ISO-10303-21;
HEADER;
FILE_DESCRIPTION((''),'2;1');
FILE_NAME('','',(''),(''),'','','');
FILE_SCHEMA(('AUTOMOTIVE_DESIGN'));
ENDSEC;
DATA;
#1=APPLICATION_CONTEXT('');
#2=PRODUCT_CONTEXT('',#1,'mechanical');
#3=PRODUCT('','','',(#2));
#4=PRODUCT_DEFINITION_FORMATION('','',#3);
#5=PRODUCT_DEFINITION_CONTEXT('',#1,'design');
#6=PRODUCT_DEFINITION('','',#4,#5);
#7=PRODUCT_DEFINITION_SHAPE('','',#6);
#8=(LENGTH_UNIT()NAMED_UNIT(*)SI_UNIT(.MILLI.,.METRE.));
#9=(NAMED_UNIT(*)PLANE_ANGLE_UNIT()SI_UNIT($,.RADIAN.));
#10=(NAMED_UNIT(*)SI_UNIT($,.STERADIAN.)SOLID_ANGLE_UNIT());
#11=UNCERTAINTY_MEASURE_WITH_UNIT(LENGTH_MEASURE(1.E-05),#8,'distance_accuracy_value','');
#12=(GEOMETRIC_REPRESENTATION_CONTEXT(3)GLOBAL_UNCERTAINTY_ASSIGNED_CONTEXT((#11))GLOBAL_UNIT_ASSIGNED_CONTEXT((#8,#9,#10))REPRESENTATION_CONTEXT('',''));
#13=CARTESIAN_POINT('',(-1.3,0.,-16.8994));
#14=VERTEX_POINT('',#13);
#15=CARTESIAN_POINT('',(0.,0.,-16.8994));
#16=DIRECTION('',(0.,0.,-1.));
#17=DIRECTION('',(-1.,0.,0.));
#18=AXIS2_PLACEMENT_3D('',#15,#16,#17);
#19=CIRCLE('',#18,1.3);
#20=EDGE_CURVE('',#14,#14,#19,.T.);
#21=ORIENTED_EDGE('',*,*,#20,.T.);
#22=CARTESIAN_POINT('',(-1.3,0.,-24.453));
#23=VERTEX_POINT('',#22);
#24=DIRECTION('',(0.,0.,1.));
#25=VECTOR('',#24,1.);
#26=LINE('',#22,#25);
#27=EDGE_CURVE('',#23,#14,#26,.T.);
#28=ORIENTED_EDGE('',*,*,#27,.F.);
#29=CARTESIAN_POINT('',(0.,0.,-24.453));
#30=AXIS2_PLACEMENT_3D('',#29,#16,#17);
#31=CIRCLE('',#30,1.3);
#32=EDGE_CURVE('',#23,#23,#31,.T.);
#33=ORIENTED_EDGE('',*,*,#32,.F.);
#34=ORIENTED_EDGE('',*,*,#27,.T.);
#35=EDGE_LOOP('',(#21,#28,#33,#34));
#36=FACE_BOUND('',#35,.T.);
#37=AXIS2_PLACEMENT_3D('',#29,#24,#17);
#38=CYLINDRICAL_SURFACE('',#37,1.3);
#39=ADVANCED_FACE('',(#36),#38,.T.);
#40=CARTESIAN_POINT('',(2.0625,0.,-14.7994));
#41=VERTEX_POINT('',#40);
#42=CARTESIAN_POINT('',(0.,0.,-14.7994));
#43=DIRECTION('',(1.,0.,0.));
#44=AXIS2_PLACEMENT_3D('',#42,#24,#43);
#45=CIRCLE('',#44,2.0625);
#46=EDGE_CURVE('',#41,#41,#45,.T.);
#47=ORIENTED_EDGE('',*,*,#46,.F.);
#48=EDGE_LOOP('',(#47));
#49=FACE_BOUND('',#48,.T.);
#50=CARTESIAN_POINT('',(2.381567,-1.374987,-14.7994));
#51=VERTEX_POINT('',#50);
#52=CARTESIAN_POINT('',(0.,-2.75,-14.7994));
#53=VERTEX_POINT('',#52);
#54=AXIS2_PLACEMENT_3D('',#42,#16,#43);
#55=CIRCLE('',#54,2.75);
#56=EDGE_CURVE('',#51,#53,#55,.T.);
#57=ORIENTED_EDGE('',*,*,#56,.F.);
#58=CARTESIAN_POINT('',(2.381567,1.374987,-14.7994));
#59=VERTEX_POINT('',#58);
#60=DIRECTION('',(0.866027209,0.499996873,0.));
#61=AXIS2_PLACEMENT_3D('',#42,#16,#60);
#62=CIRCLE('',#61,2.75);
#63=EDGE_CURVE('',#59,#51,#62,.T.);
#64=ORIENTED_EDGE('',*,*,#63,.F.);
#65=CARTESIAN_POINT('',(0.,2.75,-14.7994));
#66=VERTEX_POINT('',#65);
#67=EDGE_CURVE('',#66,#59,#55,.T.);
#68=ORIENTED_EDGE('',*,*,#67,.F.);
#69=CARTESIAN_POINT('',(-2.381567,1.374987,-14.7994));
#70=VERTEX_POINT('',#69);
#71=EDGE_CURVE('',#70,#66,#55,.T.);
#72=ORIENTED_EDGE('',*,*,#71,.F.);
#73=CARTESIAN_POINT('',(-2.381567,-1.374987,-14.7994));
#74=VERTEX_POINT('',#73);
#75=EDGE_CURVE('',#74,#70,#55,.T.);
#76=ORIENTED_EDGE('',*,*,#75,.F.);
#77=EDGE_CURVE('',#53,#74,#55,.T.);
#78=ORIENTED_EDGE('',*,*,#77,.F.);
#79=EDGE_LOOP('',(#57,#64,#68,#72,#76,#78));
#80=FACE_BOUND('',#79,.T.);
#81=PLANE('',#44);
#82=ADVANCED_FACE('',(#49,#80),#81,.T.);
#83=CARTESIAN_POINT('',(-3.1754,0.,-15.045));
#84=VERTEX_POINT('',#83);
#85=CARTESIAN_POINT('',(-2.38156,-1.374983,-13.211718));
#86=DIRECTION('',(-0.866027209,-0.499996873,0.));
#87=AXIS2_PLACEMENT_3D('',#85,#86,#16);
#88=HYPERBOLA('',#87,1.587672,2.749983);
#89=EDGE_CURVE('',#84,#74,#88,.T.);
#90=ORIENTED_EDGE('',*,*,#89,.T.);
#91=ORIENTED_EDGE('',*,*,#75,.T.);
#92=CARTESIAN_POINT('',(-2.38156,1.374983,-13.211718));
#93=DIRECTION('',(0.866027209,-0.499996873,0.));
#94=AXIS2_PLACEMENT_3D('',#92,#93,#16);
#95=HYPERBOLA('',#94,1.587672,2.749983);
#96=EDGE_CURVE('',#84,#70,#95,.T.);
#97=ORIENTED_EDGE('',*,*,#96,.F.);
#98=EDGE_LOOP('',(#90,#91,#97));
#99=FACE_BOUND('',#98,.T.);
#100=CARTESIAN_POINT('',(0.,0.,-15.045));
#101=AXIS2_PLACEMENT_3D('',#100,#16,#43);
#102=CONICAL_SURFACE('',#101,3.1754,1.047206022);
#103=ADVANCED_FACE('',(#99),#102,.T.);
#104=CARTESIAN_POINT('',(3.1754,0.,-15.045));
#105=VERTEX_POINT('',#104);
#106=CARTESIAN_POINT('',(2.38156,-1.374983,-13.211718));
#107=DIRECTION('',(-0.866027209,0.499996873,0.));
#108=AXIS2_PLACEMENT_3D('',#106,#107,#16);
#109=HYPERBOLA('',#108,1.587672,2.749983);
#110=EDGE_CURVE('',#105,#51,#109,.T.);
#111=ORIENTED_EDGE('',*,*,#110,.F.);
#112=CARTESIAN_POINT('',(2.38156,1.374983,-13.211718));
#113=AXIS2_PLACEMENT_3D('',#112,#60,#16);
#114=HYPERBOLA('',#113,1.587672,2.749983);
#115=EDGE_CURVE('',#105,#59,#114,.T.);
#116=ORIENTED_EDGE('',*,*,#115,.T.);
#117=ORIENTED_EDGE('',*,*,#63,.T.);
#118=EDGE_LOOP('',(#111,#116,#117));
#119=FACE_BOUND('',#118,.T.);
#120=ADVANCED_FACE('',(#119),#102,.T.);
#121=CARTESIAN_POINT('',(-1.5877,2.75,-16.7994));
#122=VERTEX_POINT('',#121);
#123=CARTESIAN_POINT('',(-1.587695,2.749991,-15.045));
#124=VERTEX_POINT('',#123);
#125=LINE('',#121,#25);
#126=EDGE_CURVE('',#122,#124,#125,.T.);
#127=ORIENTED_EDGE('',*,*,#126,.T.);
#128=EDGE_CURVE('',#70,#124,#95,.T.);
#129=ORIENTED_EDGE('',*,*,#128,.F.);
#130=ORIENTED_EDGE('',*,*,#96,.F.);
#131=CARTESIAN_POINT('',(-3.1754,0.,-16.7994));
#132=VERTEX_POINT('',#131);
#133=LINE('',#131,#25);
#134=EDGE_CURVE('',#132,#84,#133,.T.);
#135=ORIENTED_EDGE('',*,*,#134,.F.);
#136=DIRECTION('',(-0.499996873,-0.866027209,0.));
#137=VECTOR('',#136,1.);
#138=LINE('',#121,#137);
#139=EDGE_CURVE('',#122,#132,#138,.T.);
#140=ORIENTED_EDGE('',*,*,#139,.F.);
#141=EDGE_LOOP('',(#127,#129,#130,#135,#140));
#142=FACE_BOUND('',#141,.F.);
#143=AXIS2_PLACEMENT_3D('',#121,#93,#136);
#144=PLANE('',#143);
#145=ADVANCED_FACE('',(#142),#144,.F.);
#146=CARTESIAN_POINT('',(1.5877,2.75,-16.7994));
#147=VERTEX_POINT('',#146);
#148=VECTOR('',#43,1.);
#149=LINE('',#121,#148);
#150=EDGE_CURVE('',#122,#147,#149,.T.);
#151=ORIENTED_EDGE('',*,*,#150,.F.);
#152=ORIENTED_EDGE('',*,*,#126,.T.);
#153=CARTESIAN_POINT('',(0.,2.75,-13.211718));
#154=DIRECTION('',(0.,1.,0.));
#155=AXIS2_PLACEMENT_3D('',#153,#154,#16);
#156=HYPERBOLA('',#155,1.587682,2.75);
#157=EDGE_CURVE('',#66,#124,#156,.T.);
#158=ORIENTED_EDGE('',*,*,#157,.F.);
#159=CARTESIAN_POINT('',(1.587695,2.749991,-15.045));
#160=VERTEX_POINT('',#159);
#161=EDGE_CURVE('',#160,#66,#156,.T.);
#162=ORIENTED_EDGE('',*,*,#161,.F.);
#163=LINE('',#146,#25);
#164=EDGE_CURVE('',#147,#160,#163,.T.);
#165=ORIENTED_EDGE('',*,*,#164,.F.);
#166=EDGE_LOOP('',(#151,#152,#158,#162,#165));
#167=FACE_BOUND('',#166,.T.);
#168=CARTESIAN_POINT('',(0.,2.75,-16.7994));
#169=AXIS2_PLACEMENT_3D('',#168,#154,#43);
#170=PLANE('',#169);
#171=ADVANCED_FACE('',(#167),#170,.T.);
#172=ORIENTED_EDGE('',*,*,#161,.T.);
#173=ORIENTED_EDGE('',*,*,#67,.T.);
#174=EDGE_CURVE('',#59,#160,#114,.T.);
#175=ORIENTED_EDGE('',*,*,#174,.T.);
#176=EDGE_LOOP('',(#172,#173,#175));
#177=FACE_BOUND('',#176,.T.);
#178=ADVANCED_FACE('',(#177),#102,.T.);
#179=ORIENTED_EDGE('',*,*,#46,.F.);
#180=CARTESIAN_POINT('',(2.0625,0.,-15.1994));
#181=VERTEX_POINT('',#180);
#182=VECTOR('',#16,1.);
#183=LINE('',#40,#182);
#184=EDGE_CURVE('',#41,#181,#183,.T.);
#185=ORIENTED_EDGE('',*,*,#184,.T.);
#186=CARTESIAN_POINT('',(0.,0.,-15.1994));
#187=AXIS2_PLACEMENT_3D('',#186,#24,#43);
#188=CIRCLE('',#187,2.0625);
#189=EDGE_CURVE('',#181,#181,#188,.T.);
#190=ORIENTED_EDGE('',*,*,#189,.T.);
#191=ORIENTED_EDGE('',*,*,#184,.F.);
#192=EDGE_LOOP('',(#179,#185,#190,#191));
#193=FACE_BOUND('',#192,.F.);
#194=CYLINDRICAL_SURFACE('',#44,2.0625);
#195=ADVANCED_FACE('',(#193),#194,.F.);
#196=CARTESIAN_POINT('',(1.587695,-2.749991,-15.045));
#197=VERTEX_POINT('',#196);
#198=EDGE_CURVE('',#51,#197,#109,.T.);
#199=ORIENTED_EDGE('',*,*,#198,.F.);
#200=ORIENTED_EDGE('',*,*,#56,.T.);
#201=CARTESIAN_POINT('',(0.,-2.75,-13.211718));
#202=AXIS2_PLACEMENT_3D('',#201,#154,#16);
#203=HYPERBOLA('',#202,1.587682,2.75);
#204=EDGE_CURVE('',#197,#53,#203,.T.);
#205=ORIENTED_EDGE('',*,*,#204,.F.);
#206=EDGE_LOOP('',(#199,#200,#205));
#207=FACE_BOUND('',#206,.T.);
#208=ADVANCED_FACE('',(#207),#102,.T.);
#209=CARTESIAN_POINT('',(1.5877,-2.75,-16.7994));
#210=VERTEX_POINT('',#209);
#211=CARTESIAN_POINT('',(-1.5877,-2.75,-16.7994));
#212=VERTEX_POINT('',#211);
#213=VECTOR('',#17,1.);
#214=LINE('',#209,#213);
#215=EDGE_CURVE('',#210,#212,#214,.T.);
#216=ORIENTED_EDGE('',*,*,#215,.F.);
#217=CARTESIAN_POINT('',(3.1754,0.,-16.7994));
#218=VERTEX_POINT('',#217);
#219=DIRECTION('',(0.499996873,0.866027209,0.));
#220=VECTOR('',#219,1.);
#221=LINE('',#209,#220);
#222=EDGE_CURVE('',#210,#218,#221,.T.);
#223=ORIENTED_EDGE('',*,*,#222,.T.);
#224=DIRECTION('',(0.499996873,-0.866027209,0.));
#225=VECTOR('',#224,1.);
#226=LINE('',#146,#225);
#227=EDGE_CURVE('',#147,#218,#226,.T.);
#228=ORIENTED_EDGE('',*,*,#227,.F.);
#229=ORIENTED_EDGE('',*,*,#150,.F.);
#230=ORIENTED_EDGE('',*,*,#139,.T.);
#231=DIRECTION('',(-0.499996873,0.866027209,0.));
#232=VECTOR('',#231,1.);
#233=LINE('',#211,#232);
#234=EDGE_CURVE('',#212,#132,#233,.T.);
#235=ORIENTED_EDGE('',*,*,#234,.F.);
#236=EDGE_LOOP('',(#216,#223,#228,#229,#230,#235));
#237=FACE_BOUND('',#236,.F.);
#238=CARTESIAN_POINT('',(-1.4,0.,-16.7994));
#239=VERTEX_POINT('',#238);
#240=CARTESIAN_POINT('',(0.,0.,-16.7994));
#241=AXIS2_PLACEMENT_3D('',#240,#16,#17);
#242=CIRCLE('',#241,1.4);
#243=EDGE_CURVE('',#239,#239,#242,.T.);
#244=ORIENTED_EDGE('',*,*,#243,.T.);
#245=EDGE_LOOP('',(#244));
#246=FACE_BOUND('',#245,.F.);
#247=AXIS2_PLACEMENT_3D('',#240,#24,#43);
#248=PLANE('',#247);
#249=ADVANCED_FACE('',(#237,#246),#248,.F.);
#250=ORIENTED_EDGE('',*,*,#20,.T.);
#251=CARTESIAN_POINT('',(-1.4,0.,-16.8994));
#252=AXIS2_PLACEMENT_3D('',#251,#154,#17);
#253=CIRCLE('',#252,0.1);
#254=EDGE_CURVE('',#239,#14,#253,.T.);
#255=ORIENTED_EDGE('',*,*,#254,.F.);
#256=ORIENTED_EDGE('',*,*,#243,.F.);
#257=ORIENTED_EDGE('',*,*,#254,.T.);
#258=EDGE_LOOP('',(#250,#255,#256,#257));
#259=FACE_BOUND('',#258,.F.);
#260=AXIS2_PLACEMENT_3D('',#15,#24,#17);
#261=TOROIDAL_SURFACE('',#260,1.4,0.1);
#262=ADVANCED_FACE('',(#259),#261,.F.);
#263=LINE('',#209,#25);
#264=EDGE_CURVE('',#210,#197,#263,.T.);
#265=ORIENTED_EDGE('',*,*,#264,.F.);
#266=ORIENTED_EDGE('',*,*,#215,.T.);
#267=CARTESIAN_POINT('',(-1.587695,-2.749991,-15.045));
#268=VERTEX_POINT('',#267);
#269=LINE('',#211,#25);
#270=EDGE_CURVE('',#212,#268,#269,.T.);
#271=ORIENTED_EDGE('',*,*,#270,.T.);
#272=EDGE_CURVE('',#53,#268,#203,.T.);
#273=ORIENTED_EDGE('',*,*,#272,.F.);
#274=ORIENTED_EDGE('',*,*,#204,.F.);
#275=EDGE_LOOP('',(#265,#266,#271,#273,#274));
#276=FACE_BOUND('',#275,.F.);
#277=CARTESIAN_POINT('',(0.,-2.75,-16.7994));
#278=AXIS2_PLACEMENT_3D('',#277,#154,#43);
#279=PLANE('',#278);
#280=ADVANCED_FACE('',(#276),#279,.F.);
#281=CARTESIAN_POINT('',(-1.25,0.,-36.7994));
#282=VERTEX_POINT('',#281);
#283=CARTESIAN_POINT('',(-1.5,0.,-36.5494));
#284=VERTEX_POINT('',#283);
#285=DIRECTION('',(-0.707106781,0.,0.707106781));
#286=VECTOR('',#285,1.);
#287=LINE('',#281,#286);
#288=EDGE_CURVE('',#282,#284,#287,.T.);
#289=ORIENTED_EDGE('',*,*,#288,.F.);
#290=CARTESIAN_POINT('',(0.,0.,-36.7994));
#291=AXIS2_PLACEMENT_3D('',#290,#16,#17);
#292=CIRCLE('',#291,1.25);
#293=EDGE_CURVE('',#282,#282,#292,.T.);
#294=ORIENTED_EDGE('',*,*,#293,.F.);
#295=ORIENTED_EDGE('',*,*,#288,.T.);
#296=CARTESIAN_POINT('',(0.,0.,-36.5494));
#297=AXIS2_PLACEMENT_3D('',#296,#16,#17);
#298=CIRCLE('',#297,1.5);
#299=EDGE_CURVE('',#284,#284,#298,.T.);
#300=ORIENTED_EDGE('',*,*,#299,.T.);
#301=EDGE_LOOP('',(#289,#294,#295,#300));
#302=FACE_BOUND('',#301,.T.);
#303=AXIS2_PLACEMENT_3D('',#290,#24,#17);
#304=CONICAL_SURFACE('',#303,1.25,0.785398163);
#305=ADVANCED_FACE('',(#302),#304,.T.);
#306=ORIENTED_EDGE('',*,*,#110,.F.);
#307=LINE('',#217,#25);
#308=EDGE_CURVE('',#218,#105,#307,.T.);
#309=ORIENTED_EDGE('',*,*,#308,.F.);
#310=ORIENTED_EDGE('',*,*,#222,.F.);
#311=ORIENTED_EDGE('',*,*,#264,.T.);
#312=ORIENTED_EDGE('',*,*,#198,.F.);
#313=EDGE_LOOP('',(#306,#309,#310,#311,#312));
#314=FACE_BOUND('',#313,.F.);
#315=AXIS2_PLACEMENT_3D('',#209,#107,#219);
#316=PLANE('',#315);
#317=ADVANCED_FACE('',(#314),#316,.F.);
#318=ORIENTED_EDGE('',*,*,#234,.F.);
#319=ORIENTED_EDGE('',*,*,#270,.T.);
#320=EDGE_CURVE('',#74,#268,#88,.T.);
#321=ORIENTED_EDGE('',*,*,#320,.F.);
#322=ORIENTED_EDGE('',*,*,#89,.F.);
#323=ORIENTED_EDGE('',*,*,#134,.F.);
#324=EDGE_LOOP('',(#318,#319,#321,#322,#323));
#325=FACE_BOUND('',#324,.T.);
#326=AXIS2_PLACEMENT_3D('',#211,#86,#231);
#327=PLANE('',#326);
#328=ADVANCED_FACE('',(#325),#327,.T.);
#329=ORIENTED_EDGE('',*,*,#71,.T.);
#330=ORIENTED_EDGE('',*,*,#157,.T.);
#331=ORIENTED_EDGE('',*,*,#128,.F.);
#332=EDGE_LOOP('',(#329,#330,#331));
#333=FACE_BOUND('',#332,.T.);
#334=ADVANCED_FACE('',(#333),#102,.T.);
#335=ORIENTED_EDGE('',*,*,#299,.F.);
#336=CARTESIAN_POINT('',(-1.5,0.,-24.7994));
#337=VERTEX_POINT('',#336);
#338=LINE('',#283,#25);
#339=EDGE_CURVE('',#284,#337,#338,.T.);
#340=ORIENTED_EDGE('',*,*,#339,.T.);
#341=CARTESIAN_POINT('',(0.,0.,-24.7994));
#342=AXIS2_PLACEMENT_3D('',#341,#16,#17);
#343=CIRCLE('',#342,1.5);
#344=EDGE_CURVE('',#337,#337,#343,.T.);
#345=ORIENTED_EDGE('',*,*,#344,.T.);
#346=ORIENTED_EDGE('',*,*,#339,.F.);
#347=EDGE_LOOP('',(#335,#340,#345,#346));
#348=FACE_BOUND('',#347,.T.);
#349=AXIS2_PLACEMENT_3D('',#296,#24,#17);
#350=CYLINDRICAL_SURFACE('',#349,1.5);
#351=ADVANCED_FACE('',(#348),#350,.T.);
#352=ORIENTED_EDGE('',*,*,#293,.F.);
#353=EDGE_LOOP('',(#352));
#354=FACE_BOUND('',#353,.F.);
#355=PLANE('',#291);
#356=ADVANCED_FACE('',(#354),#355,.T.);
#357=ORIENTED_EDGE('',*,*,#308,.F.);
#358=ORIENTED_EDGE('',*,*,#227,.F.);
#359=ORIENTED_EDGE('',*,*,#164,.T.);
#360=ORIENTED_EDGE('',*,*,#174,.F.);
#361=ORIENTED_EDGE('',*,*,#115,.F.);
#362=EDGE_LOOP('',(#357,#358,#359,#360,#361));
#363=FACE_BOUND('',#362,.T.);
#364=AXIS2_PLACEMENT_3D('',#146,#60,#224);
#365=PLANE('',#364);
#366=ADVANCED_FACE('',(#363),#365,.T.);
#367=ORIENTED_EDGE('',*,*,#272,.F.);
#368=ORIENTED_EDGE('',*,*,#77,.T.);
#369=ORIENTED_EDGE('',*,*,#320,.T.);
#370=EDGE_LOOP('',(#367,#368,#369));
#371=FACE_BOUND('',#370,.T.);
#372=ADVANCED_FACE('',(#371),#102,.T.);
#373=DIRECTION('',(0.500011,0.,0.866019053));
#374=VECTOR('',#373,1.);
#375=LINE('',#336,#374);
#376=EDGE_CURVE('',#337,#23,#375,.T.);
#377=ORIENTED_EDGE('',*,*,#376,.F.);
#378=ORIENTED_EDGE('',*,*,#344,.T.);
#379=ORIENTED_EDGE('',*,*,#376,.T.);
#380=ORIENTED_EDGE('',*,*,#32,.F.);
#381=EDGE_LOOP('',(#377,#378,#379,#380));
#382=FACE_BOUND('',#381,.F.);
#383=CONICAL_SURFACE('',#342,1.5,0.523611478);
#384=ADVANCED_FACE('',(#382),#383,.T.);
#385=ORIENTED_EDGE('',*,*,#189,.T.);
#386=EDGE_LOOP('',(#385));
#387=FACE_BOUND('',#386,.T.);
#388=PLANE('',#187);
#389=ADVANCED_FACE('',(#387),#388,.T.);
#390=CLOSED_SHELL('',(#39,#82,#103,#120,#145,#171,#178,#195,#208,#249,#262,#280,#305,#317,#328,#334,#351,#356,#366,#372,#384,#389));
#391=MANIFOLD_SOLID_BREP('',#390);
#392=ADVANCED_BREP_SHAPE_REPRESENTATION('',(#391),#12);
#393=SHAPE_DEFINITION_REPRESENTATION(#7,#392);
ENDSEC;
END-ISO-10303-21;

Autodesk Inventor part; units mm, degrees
ref_plane "YZ Plane" through (0, 0, 0) normal (1, 0, 0) x (0, 1, 0)
sketch "Sketch2" plane through (0, 0, 0) normal (0, 1, 0) x (-1, 0, 0)
  line L0 (0, -16.7994) -> (0, -36.7994)
  line L1 (0, -36.7994) -> (1.25, -36.7994)
  line L2 (1.5, -36.5494) -> (1.5, -24.7994)
  line L3 (1.5, -24.7994) -> (1.3, -24.453)
  line L4 (1.3, -24.453) -> (1.3, -16.7994)
  line L5 (1.3, -16.7994) -> (0, -16.7994)
  line L6 (1.25, -36.7994) -> (1.5, -36.5494)
  line L7 (1.5, -36.7994) -> (1.5, -37.153)
  line L8 (0, -41.2237) -> (0, -12.7287) projected
  dimension "Ds" = 2.6
  dimension "NND" = 3
  dimension "b" = 12
  dimension "d3" = 30
  dimension "d5" = 45
  dimension "PTC" = 0.5
  dimension "NLG" = 20
revolve "Revolution1" add sketch "Sketch2" angle 360 about axis through (0, 0, -16.7994) along (0, 0, -1)
sketch "Sketch3" plane through (0, 0, -16.7994) normal (0, 0, 1) x (1, 0, 0)
  circle A0 centre (0, 0) radius 1.3 projected
  line L0 (0, 2.75) -> (1.5877, 2.75)
  line L1 (1.5877, 2.75) -> (3.1754, 0)
  line L2 (3.1754, 0) -> (0, 0)
  line L3 (0, 0) -> (0, 2.75)
  line L4 (0, 2.75) -> (-1.5877, 2.75)
  line L5 (-1.5877, 2.75) -> (-3.1754, 0)
  line L6 (0, -2.75) -> (1.5877, -2.75)
  line L7 (1.5877, -2.75) -> (3.1754, 0)
  line L8 (-1.5877, -2.75) -> (-3.1754, 0)
  line L9 (0, -2.75) -> (-1.5877, -2.75)
  dimension "d9" = 60
  dimension "ParS" = 5.5
  dimension "msp_d11" = 5.5
extrude "Extrusion1" add sketch "Sketch3" along normal blind 2
sketch "Sketch4" plane through (0, 0, 0) normal (0, 1, 0) x (-1, 0, 0)
  line L0 (-2.75, -14.7994) -> (-3.1754, -14.7994)
  line L1 (-3.1754, -14.7994) -> (-3.1754, -15.045)
  line L2 (-3.1754, -15.045) -> (-2.75, -14.7994)
  line L3 (0, -25.6442) -> (0, 36.2691) projected
  line L4 (0, 27.4244) -> (0, 27.1787)
  line L5 (-3.1754, -16.7994) -> (-3.1754, -14.7994) projected
  line L6 (-1.5877, -14.7994) -> (-3.1754, -14.7994) projected
  dimension "d14" = 30
  dimension "msp_d15" = 5.5
revolve "Revolution2" cut sketch "Sketch4" angle 360 about axis through (0, 0, 27.4244) along (0, 0, -1)
sketch "Sketch5" plane through (0, 0, -14.7994) normal (0, 0, 1) x (1, 0, 0)
  arc A0 (2.3816, 1.375) -> (0, 2.75) centre (0, 0) ccw projected
  circle A1 centre (0, 0) radius 2.0625
  dimension "d27" = 4.125
extrude "Extrusion2" cut sketch "Sketch5" against normal blind 0.4
thread "Thread1" size "M3x0.5" class "6g" standard "ISO Metric profile" full length
ref_plane "MSC_PF1" through (0, 0, 0) normal (0, 1, 0) x (-1, 0, 0)
ref_plane "MSC_PT1" through (0, 0, -16.7994) normal (0, 0, -1) x (-1, 0, 0)
fillet "Fillet1" radius 0.1 1 edges at (1.3, 0, -16.7994)
equation "\"msp_d11\" = ParS"
equation "\"msp_d15\" = ParS"
equation "\"d27\" = 0.75 * ParS"
equation "\"d28\" = 0.2 * ParK"
equation "\"d30\" = r"
equation "\"msp_d17\" = b"
equation "\"r\" = 0.1"
equation "\"THREADDIA\" = NND"
equation "\"ParK\" = 2"
properties part number "BS EN ISO 4015 - M3x20" material "Stainless Steel, 440C"
